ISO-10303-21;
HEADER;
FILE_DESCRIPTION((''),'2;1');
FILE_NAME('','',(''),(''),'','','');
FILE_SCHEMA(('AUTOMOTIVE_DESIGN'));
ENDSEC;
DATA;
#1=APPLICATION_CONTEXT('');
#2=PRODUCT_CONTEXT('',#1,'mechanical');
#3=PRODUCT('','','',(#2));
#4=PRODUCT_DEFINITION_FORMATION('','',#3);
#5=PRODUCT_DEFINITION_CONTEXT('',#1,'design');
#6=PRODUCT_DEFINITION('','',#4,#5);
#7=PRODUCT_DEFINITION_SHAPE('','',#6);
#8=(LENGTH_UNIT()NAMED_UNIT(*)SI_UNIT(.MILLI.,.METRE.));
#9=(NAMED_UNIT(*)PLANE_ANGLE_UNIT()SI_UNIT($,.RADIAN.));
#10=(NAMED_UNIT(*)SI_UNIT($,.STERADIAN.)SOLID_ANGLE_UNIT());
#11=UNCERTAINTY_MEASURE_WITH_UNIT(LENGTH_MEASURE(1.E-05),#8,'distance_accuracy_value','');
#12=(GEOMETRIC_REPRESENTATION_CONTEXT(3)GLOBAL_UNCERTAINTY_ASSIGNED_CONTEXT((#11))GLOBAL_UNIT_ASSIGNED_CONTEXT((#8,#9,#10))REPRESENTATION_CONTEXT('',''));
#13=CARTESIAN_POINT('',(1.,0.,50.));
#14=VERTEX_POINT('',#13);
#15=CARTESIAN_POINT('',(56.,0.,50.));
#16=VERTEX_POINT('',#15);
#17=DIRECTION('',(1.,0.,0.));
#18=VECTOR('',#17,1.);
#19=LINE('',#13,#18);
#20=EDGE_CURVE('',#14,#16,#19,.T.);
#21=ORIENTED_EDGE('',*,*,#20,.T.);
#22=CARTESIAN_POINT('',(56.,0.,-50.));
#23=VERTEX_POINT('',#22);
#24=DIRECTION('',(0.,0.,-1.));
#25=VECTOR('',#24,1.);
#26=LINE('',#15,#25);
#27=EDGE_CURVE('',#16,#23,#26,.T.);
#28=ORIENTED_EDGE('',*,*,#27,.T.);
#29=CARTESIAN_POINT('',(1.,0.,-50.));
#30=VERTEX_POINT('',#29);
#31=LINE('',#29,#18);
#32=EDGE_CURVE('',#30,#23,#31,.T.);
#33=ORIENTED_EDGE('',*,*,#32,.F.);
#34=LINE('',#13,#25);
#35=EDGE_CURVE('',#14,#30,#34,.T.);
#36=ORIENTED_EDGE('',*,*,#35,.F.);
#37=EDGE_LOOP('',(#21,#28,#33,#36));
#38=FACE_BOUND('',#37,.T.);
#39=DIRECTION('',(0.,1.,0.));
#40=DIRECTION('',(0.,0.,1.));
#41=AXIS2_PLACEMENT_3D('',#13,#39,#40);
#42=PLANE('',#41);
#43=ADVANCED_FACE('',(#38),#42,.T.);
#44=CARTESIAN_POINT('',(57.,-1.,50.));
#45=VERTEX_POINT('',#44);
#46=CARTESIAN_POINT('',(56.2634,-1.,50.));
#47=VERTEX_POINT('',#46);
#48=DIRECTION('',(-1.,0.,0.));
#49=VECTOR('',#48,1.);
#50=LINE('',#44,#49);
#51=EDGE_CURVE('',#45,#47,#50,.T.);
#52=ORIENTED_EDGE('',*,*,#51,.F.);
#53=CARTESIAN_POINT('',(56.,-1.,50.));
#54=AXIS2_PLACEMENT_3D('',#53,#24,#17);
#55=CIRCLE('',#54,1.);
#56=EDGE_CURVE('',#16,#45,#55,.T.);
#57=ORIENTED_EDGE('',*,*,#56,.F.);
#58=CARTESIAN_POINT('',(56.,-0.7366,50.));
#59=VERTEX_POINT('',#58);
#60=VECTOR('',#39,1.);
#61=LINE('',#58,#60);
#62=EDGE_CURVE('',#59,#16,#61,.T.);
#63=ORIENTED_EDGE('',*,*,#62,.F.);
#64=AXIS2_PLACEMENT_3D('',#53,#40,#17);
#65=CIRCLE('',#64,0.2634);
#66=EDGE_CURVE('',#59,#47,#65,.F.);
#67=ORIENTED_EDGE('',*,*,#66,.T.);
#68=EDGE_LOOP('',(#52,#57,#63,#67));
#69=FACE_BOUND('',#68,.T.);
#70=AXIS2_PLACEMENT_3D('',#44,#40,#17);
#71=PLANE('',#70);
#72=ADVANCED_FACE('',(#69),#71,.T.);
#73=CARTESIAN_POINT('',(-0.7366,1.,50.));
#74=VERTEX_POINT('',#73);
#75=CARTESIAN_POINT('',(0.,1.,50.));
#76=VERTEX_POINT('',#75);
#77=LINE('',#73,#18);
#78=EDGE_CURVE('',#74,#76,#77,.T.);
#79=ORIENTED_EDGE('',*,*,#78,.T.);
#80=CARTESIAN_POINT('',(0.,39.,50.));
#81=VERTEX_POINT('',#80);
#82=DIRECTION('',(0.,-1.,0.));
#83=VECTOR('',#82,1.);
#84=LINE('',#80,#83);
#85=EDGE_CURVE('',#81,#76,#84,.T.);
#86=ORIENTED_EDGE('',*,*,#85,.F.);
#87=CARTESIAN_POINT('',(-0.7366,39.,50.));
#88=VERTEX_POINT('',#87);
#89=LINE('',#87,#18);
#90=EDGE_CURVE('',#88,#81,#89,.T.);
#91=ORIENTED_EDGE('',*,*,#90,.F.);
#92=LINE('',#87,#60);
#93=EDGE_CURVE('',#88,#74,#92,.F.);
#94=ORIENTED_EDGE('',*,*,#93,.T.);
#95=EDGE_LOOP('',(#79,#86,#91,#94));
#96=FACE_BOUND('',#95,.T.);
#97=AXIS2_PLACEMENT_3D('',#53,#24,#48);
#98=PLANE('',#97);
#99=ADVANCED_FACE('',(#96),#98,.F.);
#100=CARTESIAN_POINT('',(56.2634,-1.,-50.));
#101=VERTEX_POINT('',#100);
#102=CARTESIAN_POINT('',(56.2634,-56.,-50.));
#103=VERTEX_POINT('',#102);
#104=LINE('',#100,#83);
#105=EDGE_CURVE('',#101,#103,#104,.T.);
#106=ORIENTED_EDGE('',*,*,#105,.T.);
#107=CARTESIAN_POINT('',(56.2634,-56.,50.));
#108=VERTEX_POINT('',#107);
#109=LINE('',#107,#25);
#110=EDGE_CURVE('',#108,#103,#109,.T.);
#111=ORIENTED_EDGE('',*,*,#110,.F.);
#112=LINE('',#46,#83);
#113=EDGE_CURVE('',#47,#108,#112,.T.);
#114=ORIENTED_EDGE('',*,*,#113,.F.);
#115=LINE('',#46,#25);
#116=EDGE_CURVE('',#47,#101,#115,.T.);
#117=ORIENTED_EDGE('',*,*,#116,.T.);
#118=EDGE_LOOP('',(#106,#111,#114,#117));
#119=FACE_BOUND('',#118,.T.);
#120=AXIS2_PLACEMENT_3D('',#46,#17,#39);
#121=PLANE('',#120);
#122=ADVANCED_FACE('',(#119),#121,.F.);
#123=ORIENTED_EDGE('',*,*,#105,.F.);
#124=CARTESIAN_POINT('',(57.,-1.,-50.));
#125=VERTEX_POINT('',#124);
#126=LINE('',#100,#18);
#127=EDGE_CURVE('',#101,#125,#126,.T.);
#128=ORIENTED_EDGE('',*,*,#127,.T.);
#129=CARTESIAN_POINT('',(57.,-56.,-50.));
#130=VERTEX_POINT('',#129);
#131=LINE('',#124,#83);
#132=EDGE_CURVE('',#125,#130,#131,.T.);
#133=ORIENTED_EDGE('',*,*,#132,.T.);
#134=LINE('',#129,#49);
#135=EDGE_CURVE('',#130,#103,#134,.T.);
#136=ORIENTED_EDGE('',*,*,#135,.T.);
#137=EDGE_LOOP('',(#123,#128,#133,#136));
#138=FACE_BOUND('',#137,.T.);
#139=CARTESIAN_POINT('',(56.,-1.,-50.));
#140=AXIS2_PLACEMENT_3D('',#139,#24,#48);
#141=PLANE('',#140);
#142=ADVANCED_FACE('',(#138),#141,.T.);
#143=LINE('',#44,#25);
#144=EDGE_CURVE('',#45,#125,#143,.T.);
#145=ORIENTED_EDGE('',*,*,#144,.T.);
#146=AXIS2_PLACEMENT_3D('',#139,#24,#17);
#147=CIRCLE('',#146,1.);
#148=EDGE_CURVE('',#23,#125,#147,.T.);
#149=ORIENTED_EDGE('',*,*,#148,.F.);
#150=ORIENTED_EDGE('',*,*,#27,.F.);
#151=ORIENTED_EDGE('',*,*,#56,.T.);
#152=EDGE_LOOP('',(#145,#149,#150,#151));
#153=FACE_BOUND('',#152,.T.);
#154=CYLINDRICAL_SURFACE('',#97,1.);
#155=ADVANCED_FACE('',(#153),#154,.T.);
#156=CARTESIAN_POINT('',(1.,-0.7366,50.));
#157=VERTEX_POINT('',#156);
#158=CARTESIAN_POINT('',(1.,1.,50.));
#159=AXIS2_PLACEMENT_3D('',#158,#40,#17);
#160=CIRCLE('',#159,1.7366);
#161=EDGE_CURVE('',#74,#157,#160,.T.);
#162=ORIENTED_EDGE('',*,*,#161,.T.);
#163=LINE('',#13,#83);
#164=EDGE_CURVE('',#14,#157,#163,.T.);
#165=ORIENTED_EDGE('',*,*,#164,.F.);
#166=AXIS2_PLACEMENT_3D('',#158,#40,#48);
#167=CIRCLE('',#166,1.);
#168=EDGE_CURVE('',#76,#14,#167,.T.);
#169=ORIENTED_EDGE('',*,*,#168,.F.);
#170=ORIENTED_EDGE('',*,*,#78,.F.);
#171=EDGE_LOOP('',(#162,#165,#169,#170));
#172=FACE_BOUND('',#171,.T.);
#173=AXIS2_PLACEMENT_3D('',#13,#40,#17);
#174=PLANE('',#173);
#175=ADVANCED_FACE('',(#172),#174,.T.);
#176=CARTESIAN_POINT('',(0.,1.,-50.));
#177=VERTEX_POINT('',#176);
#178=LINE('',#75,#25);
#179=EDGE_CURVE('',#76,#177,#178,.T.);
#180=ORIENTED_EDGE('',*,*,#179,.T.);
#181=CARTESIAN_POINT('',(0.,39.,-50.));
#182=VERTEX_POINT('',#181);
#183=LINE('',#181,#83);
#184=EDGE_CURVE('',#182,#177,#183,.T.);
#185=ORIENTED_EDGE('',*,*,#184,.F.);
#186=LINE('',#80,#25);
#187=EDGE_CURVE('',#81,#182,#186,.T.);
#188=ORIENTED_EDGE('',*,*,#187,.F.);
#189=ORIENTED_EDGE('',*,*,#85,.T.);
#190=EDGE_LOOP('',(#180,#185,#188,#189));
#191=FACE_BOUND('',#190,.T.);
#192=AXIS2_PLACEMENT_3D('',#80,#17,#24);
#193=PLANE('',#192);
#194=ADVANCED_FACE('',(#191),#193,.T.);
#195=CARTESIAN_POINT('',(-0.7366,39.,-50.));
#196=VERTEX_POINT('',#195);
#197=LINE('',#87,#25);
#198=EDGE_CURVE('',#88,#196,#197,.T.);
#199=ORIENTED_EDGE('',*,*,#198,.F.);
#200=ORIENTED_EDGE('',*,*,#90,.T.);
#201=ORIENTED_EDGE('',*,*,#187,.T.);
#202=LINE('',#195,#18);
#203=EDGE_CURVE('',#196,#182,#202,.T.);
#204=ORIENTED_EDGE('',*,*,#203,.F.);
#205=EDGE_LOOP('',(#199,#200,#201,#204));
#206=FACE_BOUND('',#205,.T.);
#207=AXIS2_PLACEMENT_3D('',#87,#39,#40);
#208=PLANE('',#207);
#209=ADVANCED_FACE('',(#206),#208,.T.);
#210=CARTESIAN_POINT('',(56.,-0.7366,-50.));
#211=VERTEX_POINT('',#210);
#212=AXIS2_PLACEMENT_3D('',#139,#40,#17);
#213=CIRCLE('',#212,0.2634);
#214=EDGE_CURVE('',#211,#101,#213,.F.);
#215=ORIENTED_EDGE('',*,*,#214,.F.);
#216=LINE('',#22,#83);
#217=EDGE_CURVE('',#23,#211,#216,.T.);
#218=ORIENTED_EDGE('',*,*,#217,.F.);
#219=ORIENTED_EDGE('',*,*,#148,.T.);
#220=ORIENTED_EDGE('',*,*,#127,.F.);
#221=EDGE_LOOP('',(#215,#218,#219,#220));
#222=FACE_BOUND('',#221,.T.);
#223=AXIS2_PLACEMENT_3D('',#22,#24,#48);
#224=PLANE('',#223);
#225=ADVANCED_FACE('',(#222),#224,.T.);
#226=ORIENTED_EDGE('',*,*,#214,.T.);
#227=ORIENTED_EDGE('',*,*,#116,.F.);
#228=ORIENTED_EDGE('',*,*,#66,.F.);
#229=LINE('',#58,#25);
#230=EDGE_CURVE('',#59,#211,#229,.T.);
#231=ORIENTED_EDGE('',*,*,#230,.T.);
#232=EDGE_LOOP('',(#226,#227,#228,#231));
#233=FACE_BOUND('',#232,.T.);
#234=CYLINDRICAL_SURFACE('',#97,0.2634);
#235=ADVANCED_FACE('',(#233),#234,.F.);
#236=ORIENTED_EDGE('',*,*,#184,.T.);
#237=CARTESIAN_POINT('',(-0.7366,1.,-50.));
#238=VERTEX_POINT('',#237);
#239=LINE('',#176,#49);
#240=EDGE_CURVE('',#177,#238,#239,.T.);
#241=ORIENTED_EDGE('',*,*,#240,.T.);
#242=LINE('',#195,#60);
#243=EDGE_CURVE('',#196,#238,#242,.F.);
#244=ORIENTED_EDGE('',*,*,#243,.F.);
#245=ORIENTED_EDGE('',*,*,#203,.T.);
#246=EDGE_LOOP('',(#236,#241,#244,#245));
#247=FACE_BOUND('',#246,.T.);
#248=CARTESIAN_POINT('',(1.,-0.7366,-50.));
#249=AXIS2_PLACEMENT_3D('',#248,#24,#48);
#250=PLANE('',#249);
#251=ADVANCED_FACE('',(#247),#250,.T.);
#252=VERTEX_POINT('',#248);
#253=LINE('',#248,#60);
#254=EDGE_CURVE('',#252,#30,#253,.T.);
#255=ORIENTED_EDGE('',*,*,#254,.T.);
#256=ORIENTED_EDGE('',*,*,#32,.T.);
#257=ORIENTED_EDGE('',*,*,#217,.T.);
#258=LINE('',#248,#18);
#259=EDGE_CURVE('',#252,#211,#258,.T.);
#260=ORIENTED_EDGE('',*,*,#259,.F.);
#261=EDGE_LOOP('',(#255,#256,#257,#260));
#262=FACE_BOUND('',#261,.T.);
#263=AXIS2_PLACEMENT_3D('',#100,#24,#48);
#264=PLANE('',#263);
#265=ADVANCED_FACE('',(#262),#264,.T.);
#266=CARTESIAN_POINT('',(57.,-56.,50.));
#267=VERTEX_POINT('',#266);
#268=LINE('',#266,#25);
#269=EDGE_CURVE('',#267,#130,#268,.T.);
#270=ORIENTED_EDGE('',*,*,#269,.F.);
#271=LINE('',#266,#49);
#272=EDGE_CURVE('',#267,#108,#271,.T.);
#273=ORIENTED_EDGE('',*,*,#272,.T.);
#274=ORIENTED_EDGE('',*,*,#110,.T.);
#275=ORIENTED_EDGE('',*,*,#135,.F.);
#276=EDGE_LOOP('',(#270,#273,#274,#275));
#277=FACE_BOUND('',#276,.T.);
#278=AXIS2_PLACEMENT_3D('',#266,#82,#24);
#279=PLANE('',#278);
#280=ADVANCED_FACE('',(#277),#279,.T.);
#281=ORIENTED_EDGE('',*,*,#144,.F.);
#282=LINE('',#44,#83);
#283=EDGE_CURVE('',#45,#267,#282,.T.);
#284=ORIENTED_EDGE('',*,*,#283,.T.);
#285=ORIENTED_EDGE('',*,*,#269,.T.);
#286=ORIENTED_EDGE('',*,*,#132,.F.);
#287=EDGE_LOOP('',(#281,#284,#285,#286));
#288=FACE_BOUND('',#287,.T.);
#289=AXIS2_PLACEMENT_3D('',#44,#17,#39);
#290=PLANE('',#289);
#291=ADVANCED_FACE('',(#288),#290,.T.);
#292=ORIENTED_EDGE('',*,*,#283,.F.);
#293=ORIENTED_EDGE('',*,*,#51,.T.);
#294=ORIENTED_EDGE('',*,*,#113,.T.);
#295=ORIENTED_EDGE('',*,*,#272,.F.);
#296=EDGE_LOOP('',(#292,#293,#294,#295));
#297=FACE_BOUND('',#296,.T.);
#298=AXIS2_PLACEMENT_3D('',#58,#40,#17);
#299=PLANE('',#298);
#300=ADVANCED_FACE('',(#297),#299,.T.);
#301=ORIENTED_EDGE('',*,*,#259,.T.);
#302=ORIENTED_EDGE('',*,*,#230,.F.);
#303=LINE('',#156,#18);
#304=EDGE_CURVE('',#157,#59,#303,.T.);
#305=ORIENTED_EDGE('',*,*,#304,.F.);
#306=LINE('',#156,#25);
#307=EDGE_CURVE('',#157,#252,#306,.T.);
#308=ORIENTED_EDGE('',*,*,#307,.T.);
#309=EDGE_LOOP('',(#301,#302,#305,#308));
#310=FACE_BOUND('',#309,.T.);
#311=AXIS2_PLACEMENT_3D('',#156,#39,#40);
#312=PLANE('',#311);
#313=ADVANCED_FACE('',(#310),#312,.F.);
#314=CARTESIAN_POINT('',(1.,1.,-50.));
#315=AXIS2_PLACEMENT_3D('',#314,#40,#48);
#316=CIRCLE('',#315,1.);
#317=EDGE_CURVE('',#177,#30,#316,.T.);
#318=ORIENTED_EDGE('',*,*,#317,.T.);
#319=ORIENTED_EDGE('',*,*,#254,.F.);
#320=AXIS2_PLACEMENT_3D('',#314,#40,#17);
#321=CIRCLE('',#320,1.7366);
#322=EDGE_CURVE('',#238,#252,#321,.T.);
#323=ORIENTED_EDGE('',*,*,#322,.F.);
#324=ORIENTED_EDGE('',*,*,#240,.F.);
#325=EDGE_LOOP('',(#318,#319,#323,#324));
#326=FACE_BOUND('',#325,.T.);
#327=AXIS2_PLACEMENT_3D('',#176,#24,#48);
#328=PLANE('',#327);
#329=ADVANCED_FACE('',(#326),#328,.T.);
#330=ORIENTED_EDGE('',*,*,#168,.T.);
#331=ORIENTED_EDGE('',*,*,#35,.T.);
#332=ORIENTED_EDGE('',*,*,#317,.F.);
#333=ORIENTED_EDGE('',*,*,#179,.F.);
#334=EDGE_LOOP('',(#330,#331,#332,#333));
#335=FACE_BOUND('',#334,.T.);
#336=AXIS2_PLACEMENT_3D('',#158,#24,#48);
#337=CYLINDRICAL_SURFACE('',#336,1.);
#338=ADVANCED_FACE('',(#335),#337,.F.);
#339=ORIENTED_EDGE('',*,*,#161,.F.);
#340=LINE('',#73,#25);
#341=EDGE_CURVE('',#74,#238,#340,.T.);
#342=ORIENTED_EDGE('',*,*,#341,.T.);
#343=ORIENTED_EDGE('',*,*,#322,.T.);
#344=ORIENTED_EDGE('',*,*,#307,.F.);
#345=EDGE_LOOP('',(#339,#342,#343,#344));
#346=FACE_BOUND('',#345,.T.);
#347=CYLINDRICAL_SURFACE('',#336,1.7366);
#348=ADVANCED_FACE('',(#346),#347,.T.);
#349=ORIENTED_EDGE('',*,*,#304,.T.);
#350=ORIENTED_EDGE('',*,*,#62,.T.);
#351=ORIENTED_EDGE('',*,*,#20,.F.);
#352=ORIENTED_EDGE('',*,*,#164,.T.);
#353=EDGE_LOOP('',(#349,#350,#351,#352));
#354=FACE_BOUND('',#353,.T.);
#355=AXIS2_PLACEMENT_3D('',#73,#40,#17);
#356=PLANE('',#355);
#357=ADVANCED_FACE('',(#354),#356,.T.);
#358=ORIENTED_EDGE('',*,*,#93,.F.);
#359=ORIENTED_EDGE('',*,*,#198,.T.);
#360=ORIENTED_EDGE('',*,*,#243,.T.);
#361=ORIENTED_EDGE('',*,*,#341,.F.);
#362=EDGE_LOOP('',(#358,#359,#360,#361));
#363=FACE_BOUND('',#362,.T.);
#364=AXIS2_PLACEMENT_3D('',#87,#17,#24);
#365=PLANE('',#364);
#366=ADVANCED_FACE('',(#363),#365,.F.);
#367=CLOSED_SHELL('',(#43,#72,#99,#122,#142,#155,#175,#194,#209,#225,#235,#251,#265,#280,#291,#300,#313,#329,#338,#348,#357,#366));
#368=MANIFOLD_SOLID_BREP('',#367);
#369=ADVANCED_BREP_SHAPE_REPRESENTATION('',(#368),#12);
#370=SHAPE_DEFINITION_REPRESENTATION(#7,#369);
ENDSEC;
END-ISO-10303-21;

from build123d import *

# Parameters (mm, degrees)
SM_BASE_FLANGE_1_DEPTH = 50


# Sheet-metal steps are written as plain solids
with BuildPart() as part:
    # Sketch 1 → 基体-法兰1 (new, symmetric)
    with BuildSketch(Plane.XY):
        with BuildLine():
            Line((0, 39), (0, 1))
            ThreePointArc((0, 1), (0.292893219, 0.292893219), (1, 0))
            Line((1, 0), (56, 0))
            ThreePointArc((56, 0), (56.707106781, -0.292893219), (57, -1))
            Line((57, -1), (57, -56))
            Line((57, -56), (56.2634, -56))
            Line((56.2634, -56), (56.2634, -1))
            ThreePointArc((56.2634, -1), (56.186251926, -0.813748074), (56, -0.7366))
            Line((56, -0.7366), (1, -0.7366))
            ThreePointArc((1, -0.7366), (-0.227961636, -0.227961636), (-0.7366, 1))
            Line((-0.7366, 1), (-0.7366, 39))
            Line((-0.7366, 39), (0, 39))
        make_face()
    extrude(amount=SM_BASE_FLANGE_1_DEPTH, both=True)


solid = part.part
